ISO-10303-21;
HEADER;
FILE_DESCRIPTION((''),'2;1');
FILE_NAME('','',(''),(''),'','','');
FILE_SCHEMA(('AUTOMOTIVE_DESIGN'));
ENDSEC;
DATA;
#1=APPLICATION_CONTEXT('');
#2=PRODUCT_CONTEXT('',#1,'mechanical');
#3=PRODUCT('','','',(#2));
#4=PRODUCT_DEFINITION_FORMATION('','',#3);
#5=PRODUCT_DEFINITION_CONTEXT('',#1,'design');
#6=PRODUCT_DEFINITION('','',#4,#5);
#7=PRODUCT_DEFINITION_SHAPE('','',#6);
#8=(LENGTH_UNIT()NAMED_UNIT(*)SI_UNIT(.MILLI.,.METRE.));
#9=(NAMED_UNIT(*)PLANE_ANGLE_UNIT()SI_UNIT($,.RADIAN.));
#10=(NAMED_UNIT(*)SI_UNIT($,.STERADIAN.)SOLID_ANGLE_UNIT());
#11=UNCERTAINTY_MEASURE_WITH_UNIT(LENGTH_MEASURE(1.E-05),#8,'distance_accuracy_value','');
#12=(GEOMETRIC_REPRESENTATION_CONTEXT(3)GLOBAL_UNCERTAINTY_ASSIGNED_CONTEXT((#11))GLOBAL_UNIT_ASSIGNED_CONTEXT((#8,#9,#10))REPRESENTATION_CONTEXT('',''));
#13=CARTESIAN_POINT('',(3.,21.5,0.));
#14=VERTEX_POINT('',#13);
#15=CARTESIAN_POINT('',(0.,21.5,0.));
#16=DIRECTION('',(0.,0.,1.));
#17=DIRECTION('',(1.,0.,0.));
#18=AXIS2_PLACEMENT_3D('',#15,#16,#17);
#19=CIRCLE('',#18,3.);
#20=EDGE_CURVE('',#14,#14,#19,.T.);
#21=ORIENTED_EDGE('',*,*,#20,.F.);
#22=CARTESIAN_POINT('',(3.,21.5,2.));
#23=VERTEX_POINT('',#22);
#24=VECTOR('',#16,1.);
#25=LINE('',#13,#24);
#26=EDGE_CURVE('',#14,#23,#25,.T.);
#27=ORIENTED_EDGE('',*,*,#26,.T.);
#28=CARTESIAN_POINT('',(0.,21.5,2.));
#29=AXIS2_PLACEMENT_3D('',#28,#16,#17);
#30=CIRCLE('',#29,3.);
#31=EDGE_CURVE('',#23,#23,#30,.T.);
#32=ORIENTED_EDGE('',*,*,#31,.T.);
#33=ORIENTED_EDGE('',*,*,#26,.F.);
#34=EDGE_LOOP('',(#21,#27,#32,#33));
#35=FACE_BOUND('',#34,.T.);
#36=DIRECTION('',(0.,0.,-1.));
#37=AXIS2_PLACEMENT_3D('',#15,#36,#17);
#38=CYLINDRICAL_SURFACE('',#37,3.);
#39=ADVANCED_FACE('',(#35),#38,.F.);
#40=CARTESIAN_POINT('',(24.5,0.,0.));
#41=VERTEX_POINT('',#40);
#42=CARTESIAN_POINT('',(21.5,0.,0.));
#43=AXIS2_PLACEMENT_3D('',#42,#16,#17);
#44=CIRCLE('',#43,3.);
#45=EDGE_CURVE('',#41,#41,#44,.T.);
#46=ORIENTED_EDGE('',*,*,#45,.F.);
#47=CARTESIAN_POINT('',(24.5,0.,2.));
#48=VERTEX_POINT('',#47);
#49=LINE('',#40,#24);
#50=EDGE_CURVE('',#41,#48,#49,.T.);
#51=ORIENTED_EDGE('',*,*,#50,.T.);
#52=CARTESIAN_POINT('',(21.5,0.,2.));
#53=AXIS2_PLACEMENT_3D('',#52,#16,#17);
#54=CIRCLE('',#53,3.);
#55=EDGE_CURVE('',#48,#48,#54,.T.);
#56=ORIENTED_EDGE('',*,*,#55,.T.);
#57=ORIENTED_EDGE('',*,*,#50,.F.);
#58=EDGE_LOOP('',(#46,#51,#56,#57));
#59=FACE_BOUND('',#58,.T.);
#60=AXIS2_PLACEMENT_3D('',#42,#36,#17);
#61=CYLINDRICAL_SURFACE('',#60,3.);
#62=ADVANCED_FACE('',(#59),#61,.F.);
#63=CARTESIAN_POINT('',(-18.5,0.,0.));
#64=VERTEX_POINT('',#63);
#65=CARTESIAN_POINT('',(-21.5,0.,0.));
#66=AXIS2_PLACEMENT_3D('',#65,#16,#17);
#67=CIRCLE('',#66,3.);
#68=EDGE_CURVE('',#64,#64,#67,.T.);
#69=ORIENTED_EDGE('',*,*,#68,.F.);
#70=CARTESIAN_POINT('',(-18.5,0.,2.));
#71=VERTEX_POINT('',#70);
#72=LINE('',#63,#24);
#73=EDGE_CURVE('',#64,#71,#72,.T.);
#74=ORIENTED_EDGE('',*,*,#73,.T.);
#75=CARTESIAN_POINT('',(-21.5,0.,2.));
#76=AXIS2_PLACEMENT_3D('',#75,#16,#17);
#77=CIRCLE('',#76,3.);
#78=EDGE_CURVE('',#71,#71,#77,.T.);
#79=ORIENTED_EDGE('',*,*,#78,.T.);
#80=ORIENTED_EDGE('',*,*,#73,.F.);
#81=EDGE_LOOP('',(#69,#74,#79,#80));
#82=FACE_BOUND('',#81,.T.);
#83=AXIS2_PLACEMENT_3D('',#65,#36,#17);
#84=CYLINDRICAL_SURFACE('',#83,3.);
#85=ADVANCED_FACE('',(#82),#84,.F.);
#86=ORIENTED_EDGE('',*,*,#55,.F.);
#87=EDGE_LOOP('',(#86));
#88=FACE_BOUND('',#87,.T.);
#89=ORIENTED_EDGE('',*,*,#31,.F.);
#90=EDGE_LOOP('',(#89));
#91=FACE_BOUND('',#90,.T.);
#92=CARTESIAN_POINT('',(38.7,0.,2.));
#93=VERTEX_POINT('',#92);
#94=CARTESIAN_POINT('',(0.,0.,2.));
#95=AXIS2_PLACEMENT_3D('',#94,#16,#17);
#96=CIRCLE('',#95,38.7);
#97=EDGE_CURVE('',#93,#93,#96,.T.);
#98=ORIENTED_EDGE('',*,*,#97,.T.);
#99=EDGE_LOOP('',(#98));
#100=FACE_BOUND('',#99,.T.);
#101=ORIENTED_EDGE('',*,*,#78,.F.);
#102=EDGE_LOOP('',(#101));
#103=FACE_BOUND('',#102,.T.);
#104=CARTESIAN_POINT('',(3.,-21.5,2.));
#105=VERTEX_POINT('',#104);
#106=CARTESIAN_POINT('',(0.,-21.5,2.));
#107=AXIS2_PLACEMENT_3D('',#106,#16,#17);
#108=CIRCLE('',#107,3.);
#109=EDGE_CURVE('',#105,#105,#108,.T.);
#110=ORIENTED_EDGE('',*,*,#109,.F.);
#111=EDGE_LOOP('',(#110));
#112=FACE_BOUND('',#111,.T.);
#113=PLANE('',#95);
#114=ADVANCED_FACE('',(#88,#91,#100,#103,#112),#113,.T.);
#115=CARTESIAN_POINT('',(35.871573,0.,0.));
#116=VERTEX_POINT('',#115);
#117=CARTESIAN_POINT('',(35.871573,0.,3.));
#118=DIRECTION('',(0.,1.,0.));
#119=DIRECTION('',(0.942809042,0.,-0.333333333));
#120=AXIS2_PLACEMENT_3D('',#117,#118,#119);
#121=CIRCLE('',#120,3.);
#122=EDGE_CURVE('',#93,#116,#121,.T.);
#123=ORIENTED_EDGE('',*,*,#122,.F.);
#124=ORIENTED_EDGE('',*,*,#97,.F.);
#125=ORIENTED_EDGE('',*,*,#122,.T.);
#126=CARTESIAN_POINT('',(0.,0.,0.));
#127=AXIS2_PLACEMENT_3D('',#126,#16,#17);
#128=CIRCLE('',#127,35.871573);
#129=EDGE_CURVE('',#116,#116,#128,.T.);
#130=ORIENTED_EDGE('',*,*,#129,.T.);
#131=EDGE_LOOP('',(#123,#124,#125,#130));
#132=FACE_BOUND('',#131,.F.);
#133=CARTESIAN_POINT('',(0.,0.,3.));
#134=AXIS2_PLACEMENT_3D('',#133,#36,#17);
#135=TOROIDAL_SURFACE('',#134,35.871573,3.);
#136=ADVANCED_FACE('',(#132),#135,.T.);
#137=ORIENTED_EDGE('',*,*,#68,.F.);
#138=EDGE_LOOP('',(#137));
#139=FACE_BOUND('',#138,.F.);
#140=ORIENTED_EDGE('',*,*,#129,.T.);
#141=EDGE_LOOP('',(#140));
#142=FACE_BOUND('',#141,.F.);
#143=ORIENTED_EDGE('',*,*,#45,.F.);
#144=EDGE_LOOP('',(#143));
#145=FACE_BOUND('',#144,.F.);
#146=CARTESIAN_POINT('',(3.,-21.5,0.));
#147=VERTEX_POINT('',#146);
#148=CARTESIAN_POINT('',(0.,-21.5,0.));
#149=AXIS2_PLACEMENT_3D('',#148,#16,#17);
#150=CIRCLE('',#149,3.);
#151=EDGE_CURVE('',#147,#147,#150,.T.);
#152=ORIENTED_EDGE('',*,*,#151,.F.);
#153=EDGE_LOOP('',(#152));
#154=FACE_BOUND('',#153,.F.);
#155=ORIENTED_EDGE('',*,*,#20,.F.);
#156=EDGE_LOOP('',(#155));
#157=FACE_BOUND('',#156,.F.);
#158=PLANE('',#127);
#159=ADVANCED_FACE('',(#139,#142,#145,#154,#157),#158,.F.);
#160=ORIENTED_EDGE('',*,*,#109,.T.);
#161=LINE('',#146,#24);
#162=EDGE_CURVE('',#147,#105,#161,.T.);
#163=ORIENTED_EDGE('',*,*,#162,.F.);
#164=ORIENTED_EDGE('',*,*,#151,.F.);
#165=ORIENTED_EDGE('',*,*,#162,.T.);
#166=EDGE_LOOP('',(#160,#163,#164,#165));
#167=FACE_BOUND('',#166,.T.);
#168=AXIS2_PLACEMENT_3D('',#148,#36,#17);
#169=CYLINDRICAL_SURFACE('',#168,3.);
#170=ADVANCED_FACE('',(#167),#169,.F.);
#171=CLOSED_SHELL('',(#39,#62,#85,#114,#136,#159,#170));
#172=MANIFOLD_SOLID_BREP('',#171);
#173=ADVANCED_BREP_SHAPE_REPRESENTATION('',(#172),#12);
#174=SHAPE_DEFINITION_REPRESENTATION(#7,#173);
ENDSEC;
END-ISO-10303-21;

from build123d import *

# Parameters (mm, degrees)
F0_R     = 38.7
F0_R_2   = 3
F1_DEPTH = 2


# Not quite as in the source:
# - a fillet or chamfer that OpenCascade refuses, or shapes differently, is made with other operations: its cross-section is extruded or revolved along the edge and cut away or added


with BuildPart() as f1:
    # F0 (on Top) → F1 (new body)
    with BuildSketch(Plane.XY):
        Circle(F0_R)
        with Locations((0, -21.5)):
            Circle(F0_R_2, mode=Mode.SUBTRACT)
        with Locations((-21.5, 0)):
            Circle(F0_R_2, mode=Mode.SUBTRACT)
        with Locations((21.5, 0)):
            Circle(F0_R_2, mode=Mode.SUBTRACT)
        with Locations((0, 21.5)):
            Circle(F0_R_2, mode=Mode.SUBTRACT)
    extrude(amount=F1_DEPTH)

    # F2: fillet of radius 3 on 1 edges, made by hand

    # F2_s1 → F2_t2 (revolve, cut)
    with BuildSketch(Plane.XZ):
        with BuildLine():
            ThreePointArc((38.7, 2), (37.6036236828, 0.5505102572), (35.8715728753, 0))
            Line((35.8715728753, 0), (38.7, 0))
            Line((38.7, 0), (38.7, 2))
        make_face()
    revolve(axis=Axis((0, 0, 0), (0, 0, 1)), mode=Mode.SUBTRACT)


solid = f1.part
